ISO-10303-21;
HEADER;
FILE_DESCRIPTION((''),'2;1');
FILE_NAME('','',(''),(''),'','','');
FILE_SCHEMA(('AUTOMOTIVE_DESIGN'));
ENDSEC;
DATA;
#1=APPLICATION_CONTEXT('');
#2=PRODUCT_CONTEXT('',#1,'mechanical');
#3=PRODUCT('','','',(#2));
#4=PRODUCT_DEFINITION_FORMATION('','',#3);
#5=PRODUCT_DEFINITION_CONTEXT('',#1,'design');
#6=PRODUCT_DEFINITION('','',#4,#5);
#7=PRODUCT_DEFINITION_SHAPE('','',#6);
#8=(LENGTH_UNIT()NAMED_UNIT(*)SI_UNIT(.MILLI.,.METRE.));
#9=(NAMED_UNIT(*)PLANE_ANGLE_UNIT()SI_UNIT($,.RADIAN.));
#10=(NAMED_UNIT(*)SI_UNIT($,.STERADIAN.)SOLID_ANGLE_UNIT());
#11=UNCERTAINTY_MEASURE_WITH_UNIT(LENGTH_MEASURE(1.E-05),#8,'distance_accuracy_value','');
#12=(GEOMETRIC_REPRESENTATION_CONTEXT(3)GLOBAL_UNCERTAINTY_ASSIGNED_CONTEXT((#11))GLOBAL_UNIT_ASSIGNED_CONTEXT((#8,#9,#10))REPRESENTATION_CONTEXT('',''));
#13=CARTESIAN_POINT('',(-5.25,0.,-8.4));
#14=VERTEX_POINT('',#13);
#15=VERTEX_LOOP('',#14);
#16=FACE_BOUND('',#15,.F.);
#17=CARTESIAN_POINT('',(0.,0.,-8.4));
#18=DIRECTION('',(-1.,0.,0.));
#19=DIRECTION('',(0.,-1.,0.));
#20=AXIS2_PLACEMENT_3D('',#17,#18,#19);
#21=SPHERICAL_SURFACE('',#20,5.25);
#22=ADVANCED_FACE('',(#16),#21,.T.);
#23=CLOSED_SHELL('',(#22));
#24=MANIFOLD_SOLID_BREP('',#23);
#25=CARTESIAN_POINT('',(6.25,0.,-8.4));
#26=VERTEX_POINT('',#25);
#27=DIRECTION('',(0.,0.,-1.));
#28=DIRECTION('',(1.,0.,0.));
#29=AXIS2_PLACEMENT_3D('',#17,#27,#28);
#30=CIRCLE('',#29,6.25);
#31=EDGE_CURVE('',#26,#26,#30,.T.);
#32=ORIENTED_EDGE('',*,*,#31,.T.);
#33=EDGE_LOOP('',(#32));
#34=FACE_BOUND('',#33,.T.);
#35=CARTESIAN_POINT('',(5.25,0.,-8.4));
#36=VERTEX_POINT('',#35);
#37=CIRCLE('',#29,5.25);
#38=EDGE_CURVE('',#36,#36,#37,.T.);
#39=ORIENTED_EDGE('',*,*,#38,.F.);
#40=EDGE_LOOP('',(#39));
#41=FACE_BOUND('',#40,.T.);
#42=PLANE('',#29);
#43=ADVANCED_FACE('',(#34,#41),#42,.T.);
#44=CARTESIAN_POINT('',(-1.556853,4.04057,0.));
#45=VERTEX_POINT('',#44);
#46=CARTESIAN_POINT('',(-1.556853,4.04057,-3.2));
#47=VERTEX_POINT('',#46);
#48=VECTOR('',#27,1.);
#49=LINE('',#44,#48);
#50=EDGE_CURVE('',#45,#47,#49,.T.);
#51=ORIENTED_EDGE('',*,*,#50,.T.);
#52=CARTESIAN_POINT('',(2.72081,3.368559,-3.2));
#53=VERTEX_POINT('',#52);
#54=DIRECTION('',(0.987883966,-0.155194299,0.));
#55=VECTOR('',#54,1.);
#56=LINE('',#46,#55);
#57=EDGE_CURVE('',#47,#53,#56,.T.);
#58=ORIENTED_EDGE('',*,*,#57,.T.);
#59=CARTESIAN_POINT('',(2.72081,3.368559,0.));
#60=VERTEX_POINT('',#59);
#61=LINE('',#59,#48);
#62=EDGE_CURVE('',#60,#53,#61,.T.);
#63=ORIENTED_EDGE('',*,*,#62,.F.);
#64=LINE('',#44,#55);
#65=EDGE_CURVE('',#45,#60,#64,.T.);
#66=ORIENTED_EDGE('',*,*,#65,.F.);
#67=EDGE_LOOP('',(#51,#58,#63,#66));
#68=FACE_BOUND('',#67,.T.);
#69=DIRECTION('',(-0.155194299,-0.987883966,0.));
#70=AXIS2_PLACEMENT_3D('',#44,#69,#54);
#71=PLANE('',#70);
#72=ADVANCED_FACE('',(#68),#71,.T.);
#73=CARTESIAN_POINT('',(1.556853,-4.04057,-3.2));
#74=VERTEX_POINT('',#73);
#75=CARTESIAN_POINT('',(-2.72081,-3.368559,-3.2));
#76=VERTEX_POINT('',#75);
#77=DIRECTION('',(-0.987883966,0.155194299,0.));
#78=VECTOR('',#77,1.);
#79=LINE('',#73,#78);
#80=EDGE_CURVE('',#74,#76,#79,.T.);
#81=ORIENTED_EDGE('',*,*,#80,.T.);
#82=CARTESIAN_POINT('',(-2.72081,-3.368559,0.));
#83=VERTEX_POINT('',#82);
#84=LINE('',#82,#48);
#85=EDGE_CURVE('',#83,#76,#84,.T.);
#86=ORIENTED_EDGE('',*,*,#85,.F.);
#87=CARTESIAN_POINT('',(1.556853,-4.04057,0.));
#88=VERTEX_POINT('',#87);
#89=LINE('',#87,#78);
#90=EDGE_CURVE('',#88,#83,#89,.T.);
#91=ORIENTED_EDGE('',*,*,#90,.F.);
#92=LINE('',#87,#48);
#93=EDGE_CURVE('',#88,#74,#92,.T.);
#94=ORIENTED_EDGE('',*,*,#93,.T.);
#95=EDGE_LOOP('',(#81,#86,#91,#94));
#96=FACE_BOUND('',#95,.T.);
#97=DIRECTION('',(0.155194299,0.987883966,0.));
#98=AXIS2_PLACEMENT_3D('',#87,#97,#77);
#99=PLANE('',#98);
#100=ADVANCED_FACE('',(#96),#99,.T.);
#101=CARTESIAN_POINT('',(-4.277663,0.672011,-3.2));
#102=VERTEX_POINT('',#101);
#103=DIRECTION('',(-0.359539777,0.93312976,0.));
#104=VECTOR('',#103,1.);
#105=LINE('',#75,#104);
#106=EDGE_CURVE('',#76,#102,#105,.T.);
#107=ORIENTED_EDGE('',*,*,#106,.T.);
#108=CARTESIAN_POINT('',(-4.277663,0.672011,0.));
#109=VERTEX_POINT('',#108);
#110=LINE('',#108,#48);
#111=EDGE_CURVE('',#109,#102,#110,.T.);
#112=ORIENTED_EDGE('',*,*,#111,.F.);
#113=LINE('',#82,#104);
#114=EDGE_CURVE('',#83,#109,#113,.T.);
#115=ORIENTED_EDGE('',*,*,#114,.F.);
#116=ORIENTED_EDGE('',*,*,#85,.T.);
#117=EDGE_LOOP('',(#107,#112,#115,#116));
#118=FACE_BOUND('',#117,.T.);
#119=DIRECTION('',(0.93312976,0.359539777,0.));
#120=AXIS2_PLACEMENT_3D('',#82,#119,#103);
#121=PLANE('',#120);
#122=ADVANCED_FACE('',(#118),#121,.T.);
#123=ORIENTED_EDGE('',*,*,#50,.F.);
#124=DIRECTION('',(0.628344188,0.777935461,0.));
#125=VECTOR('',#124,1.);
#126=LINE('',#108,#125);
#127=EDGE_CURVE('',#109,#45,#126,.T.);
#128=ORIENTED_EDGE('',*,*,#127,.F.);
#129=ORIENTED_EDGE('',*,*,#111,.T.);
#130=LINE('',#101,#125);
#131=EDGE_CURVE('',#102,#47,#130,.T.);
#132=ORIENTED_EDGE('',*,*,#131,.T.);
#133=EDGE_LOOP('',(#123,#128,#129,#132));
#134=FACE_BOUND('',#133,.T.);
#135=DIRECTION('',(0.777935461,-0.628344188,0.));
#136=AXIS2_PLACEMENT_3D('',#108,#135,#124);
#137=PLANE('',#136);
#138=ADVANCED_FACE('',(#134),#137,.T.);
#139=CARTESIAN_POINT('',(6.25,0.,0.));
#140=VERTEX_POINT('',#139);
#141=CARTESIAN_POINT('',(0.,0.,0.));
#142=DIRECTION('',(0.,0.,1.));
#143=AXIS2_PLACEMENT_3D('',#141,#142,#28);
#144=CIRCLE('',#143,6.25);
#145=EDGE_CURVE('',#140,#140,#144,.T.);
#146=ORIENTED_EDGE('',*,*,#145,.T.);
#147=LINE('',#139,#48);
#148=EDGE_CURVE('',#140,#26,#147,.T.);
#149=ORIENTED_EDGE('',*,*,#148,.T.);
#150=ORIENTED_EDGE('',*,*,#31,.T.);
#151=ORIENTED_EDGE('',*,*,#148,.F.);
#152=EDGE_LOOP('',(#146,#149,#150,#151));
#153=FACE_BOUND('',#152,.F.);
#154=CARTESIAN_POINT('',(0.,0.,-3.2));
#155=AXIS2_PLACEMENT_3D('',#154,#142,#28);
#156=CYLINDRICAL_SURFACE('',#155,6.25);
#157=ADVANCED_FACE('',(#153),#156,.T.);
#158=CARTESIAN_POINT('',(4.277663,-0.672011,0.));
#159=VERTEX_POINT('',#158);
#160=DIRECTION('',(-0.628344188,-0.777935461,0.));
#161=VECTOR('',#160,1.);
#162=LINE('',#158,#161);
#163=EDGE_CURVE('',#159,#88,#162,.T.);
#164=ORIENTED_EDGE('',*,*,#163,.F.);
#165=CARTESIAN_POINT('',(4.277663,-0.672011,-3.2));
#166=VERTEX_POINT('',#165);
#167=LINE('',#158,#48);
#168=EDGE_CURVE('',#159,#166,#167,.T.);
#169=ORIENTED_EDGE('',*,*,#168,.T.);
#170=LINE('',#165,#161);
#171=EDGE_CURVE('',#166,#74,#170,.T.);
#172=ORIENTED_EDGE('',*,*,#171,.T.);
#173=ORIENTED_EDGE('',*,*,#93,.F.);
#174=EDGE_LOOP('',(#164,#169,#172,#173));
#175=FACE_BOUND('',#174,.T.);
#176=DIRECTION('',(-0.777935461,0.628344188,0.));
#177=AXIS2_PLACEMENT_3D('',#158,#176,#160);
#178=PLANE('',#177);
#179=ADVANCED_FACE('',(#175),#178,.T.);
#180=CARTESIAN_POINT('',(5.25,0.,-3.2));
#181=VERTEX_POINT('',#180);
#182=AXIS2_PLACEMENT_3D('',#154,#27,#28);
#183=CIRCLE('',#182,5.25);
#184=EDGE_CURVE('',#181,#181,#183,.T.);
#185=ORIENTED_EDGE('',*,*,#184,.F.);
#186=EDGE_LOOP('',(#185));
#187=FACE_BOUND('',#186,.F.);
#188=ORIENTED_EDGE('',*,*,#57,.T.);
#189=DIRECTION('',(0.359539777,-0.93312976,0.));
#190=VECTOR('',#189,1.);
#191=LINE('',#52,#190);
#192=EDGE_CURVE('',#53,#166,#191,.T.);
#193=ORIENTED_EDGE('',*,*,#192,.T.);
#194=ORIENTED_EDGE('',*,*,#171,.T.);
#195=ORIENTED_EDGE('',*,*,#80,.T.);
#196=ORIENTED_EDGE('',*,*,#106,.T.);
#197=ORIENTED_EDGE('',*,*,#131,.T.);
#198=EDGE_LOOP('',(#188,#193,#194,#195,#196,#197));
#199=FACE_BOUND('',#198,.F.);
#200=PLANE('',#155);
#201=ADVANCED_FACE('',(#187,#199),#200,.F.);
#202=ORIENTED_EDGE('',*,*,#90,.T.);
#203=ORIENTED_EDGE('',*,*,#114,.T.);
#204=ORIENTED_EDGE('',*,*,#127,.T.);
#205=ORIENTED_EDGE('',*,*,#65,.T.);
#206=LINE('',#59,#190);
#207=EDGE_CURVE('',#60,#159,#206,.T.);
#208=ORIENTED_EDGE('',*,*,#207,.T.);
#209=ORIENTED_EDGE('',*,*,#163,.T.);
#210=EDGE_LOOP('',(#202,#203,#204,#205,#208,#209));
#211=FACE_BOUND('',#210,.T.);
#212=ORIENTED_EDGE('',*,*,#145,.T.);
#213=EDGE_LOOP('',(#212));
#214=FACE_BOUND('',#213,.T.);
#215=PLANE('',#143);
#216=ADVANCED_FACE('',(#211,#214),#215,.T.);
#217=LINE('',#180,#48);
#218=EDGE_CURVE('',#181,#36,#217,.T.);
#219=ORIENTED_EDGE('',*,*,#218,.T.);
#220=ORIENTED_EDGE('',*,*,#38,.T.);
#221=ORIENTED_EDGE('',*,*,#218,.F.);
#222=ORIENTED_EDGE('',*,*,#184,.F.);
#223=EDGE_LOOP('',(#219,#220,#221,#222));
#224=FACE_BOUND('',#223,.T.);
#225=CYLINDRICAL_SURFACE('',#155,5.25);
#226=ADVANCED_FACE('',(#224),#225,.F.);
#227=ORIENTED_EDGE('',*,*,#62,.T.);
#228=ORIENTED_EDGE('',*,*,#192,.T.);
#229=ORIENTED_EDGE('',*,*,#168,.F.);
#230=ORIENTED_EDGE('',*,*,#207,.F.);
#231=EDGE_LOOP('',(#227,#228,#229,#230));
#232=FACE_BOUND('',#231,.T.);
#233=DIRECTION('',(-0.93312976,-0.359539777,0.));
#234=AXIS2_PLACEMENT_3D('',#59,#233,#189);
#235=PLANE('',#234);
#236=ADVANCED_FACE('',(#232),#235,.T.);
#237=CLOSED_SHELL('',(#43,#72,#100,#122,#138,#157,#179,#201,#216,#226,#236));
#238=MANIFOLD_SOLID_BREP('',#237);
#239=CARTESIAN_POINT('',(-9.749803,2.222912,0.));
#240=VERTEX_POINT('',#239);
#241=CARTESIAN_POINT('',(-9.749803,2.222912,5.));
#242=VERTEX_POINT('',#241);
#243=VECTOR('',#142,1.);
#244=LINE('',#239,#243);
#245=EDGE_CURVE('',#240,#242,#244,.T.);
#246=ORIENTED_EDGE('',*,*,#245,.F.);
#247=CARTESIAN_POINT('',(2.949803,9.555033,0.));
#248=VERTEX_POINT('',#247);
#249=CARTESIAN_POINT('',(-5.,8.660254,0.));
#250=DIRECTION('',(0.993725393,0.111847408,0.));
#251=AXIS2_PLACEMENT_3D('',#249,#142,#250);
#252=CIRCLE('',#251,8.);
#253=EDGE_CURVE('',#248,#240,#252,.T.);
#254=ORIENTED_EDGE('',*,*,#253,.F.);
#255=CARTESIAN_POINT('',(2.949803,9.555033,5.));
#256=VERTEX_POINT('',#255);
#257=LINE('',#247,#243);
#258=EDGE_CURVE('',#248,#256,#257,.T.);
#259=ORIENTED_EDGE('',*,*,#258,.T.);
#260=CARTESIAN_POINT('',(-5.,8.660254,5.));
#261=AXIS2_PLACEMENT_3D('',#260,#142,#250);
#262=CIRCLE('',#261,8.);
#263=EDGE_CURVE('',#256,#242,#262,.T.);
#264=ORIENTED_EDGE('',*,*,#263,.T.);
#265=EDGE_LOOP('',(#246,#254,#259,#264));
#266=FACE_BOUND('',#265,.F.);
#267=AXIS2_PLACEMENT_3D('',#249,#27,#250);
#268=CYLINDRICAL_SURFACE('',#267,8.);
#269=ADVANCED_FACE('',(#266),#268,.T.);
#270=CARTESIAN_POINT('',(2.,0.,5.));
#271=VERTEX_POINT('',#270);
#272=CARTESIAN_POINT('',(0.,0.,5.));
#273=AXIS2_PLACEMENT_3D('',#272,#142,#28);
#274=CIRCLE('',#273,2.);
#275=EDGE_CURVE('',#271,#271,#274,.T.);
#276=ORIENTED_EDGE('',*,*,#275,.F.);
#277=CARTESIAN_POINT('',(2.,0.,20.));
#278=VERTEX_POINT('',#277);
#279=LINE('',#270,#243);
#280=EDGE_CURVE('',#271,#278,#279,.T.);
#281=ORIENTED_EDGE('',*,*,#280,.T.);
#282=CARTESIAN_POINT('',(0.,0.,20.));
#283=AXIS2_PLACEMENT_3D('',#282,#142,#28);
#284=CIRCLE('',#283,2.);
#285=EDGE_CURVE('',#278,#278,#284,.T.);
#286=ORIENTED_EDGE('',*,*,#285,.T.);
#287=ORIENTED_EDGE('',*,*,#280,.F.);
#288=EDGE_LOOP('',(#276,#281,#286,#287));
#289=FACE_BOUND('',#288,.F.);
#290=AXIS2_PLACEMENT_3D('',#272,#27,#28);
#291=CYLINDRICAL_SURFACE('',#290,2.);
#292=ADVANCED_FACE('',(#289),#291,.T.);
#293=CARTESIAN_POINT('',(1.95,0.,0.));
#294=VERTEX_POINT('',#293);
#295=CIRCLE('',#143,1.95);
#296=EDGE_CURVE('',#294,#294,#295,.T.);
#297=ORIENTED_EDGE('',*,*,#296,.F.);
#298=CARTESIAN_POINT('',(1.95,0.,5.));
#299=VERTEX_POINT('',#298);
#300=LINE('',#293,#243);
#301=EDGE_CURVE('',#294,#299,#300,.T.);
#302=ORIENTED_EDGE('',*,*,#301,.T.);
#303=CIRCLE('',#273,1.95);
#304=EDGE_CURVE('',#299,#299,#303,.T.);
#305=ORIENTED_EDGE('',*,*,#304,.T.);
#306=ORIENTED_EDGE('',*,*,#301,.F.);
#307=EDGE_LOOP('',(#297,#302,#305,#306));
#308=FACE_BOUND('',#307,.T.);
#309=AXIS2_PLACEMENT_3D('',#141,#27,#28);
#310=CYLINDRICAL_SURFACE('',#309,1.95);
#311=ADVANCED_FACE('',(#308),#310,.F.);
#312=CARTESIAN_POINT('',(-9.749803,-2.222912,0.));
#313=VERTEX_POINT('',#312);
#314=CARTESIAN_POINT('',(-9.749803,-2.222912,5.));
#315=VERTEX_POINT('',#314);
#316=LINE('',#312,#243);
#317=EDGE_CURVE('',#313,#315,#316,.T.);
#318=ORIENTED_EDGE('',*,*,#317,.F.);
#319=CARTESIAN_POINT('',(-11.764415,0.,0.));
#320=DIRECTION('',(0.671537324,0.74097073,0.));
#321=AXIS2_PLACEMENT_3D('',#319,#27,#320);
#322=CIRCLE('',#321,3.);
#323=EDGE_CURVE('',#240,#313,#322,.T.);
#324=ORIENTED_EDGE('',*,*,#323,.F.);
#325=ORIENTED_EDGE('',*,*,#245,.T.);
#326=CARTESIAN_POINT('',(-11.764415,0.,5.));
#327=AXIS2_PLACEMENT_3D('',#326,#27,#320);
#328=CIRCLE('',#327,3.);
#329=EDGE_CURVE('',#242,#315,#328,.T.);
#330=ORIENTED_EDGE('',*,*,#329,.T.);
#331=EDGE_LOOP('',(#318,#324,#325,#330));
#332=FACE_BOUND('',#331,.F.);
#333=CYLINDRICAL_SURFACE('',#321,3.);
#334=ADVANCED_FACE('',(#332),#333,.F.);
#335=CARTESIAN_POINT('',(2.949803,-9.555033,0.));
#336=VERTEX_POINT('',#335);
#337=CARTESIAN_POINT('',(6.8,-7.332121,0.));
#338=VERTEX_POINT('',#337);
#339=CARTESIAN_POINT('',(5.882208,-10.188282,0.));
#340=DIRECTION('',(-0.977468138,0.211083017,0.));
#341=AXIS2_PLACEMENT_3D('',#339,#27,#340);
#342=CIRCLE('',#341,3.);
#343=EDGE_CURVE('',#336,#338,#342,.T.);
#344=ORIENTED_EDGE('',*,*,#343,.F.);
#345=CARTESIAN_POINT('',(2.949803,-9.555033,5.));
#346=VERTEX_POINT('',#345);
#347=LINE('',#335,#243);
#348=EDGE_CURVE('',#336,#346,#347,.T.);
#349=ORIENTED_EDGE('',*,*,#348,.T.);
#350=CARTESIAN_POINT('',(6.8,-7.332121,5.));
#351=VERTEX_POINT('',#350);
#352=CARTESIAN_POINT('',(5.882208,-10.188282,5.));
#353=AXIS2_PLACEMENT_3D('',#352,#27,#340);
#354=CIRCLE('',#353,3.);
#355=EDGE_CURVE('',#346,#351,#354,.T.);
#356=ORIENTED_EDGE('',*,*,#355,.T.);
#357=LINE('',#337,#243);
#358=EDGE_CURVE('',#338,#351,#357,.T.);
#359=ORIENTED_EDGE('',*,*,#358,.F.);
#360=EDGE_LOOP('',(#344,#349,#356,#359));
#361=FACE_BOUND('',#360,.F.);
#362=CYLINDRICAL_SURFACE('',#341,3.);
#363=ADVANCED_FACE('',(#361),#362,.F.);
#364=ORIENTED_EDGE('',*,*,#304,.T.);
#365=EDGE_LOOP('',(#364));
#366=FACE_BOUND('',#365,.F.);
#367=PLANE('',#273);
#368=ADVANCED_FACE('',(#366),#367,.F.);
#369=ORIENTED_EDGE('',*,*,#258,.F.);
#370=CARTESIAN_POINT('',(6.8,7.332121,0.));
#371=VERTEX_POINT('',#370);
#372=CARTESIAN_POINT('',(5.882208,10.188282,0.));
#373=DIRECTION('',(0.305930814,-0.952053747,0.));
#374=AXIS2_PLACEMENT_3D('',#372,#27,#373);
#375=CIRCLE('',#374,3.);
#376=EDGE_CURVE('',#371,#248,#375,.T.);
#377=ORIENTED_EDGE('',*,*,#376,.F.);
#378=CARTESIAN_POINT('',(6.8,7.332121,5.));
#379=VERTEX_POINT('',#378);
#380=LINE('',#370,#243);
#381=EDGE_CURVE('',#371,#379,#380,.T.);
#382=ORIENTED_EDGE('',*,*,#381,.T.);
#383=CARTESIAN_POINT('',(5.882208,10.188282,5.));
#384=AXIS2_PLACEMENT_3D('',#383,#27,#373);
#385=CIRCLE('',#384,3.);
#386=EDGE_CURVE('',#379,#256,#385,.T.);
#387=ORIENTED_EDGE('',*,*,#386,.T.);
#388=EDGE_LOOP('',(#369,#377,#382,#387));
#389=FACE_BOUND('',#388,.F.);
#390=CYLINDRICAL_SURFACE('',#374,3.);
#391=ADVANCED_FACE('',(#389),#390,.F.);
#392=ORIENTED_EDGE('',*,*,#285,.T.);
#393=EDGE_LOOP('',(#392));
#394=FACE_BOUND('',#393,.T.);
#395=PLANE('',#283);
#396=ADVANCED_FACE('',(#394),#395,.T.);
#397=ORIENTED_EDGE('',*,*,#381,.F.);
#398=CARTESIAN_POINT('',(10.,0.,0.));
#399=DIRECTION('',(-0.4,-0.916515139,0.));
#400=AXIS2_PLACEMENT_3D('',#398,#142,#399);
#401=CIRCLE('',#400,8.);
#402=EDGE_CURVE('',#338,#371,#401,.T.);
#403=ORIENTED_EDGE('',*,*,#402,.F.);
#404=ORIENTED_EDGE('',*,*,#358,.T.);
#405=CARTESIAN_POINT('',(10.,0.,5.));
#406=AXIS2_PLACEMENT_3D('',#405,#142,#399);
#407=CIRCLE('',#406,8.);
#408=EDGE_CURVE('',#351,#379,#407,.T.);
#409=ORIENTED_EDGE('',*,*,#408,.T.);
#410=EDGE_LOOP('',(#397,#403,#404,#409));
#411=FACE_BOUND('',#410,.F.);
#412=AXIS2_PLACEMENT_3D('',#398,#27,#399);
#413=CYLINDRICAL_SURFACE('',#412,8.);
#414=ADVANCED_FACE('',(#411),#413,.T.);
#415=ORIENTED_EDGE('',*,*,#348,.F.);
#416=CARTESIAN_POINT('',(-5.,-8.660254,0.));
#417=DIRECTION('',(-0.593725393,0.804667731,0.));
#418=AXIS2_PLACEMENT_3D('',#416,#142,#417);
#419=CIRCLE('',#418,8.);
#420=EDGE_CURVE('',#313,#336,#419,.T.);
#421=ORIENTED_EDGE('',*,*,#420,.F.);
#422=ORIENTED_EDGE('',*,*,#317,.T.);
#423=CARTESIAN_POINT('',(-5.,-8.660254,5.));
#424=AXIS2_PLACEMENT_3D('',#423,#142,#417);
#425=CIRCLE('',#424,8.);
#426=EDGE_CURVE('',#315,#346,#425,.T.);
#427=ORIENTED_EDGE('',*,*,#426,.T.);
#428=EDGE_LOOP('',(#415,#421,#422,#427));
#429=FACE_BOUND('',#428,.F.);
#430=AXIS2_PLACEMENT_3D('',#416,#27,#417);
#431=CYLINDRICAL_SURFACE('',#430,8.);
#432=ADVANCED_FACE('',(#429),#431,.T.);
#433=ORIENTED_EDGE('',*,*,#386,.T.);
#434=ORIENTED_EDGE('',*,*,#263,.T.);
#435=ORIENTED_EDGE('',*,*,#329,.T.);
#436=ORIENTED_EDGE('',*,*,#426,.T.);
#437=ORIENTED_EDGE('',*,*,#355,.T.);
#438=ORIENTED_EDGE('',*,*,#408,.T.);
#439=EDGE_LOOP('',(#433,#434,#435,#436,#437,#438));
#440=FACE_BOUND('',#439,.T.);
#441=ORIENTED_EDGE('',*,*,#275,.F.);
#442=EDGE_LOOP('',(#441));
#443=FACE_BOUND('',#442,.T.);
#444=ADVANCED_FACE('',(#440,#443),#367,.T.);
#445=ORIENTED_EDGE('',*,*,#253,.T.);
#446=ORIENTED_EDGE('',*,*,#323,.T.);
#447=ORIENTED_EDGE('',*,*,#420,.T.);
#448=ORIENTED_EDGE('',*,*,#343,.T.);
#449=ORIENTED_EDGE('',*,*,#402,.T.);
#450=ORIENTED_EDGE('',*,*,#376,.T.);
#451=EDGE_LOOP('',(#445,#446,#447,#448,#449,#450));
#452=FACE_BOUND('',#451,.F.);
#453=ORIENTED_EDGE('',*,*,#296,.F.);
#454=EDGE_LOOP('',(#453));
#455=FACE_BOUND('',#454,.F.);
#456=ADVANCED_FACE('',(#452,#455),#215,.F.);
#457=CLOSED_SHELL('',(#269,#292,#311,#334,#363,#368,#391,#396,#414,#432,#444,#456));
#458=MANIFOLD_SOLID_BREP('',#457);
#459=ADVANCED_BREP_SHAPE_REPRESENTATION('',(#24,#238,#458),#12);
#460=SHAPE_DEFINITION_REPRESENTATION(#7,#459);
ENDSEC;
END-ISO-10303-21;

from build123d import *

# Parameters (mm, degrees)
F0_R     = 1.95
F1_DEPTH = 5
F2_R     = 6.25
F3_DEPTH = 3.2
F4_R     = 6.25
F4_R_2   = 5.25
F5_DEPTH = 5.2
F6_R     = 2
F7_DEPTH = 15


# Not quite as in the source:
# - ends of sketch curves that miss each other by under 0.0002 mm in the source are joined


with BuildPart() as f1:
    # F0 (on Top) → F1 (new body)
    with BuildSketch(Plane.XY):
        with BuildLine():
            ThreePointArc((2.9498031466, -9.5550333017), (4.3822075591, -7.5902061417), (6.8, -7.3321211119))
            ThreePointArc((6.8, -7.3321211119), (18, 0), (6.8, 7.3321211119))
            ThreePointArc((6.8, 7.3321211119), (4.3822075591, 7.5902061417), (2.9498031466, 9.5550333017))
            ThreePointArc((2.9498031466, 9.5550333017), (-9, 15.5884572681), (-9.7498031466, 2.2229121898))
            ThreePointArc((-9.7498031466, 2.2229121898), (-8.7644151183, 0), (-9.7498031466, -2.2229121898))
            ThreePointArc((-9.7498031466, -2.2229121898), (-9, -15.5884572681), (2.9498031466, -9.5550333017))
        make_face()
        Circle(F0_R, mode=Mode.SUBTRACT)
    extrude(amount=F1_DEPTH)

    # F6 (on face) → F7 (join)
    with BuildSketch(Plane.XY.offset(5)):
        Circle(F6_R)
    extrude(amount=F7_DEPTH)


with BuildPart() as f3:
    # F2 (on Top) → F3 (new body)
    with BuildSketch(Plane.XY):
        Circle(F2_R)
        Polygon((-1.5568529045, 4.0405703847), (2.7208101467, 3.3685593576), (4.2776630512, -0.6720110271), (1.5568529045, -4.0405703847), (-2.7208101467, -3.3685593576), (-4.2776630512, 0.6720110271), align=None, mode=Mode.SUBTRACT)
    extrude(amount=-F3_DEPTH)

    # F4 (on face) → F5 (join)
    with BuildSketch(Plane(origin=(0, 0, -3.2), x_dir=(1, 0, 0), z_dir=(0, 0, -1))):
        Circle(F4_R)
        Circle(F4_R_2, mode=Mode.SUBTRACT)
    extrude(amount=F5_DEPTH)


with BuildPart() as f9:
    # F8 (on face) → F9 (revolve)
    with BuildSketch(Plane(origin=(0, 0, -8.4), x_dir=(1, 0, 0), z_dir=(0, 0, -1))):
        with BuildLine():
            ThreePointArc((5.2500002044, 0), (0, 5.2500002044), (-5.2500002044, 0))
            Line((-5.2500002044, 0), (5.2500002044, 0))
        make_face()
    revolve(axis=Axis((0, 0, -8.4), (1, 0, 0)))


solid = Compound([f1.part, f3.part, f9.part])
